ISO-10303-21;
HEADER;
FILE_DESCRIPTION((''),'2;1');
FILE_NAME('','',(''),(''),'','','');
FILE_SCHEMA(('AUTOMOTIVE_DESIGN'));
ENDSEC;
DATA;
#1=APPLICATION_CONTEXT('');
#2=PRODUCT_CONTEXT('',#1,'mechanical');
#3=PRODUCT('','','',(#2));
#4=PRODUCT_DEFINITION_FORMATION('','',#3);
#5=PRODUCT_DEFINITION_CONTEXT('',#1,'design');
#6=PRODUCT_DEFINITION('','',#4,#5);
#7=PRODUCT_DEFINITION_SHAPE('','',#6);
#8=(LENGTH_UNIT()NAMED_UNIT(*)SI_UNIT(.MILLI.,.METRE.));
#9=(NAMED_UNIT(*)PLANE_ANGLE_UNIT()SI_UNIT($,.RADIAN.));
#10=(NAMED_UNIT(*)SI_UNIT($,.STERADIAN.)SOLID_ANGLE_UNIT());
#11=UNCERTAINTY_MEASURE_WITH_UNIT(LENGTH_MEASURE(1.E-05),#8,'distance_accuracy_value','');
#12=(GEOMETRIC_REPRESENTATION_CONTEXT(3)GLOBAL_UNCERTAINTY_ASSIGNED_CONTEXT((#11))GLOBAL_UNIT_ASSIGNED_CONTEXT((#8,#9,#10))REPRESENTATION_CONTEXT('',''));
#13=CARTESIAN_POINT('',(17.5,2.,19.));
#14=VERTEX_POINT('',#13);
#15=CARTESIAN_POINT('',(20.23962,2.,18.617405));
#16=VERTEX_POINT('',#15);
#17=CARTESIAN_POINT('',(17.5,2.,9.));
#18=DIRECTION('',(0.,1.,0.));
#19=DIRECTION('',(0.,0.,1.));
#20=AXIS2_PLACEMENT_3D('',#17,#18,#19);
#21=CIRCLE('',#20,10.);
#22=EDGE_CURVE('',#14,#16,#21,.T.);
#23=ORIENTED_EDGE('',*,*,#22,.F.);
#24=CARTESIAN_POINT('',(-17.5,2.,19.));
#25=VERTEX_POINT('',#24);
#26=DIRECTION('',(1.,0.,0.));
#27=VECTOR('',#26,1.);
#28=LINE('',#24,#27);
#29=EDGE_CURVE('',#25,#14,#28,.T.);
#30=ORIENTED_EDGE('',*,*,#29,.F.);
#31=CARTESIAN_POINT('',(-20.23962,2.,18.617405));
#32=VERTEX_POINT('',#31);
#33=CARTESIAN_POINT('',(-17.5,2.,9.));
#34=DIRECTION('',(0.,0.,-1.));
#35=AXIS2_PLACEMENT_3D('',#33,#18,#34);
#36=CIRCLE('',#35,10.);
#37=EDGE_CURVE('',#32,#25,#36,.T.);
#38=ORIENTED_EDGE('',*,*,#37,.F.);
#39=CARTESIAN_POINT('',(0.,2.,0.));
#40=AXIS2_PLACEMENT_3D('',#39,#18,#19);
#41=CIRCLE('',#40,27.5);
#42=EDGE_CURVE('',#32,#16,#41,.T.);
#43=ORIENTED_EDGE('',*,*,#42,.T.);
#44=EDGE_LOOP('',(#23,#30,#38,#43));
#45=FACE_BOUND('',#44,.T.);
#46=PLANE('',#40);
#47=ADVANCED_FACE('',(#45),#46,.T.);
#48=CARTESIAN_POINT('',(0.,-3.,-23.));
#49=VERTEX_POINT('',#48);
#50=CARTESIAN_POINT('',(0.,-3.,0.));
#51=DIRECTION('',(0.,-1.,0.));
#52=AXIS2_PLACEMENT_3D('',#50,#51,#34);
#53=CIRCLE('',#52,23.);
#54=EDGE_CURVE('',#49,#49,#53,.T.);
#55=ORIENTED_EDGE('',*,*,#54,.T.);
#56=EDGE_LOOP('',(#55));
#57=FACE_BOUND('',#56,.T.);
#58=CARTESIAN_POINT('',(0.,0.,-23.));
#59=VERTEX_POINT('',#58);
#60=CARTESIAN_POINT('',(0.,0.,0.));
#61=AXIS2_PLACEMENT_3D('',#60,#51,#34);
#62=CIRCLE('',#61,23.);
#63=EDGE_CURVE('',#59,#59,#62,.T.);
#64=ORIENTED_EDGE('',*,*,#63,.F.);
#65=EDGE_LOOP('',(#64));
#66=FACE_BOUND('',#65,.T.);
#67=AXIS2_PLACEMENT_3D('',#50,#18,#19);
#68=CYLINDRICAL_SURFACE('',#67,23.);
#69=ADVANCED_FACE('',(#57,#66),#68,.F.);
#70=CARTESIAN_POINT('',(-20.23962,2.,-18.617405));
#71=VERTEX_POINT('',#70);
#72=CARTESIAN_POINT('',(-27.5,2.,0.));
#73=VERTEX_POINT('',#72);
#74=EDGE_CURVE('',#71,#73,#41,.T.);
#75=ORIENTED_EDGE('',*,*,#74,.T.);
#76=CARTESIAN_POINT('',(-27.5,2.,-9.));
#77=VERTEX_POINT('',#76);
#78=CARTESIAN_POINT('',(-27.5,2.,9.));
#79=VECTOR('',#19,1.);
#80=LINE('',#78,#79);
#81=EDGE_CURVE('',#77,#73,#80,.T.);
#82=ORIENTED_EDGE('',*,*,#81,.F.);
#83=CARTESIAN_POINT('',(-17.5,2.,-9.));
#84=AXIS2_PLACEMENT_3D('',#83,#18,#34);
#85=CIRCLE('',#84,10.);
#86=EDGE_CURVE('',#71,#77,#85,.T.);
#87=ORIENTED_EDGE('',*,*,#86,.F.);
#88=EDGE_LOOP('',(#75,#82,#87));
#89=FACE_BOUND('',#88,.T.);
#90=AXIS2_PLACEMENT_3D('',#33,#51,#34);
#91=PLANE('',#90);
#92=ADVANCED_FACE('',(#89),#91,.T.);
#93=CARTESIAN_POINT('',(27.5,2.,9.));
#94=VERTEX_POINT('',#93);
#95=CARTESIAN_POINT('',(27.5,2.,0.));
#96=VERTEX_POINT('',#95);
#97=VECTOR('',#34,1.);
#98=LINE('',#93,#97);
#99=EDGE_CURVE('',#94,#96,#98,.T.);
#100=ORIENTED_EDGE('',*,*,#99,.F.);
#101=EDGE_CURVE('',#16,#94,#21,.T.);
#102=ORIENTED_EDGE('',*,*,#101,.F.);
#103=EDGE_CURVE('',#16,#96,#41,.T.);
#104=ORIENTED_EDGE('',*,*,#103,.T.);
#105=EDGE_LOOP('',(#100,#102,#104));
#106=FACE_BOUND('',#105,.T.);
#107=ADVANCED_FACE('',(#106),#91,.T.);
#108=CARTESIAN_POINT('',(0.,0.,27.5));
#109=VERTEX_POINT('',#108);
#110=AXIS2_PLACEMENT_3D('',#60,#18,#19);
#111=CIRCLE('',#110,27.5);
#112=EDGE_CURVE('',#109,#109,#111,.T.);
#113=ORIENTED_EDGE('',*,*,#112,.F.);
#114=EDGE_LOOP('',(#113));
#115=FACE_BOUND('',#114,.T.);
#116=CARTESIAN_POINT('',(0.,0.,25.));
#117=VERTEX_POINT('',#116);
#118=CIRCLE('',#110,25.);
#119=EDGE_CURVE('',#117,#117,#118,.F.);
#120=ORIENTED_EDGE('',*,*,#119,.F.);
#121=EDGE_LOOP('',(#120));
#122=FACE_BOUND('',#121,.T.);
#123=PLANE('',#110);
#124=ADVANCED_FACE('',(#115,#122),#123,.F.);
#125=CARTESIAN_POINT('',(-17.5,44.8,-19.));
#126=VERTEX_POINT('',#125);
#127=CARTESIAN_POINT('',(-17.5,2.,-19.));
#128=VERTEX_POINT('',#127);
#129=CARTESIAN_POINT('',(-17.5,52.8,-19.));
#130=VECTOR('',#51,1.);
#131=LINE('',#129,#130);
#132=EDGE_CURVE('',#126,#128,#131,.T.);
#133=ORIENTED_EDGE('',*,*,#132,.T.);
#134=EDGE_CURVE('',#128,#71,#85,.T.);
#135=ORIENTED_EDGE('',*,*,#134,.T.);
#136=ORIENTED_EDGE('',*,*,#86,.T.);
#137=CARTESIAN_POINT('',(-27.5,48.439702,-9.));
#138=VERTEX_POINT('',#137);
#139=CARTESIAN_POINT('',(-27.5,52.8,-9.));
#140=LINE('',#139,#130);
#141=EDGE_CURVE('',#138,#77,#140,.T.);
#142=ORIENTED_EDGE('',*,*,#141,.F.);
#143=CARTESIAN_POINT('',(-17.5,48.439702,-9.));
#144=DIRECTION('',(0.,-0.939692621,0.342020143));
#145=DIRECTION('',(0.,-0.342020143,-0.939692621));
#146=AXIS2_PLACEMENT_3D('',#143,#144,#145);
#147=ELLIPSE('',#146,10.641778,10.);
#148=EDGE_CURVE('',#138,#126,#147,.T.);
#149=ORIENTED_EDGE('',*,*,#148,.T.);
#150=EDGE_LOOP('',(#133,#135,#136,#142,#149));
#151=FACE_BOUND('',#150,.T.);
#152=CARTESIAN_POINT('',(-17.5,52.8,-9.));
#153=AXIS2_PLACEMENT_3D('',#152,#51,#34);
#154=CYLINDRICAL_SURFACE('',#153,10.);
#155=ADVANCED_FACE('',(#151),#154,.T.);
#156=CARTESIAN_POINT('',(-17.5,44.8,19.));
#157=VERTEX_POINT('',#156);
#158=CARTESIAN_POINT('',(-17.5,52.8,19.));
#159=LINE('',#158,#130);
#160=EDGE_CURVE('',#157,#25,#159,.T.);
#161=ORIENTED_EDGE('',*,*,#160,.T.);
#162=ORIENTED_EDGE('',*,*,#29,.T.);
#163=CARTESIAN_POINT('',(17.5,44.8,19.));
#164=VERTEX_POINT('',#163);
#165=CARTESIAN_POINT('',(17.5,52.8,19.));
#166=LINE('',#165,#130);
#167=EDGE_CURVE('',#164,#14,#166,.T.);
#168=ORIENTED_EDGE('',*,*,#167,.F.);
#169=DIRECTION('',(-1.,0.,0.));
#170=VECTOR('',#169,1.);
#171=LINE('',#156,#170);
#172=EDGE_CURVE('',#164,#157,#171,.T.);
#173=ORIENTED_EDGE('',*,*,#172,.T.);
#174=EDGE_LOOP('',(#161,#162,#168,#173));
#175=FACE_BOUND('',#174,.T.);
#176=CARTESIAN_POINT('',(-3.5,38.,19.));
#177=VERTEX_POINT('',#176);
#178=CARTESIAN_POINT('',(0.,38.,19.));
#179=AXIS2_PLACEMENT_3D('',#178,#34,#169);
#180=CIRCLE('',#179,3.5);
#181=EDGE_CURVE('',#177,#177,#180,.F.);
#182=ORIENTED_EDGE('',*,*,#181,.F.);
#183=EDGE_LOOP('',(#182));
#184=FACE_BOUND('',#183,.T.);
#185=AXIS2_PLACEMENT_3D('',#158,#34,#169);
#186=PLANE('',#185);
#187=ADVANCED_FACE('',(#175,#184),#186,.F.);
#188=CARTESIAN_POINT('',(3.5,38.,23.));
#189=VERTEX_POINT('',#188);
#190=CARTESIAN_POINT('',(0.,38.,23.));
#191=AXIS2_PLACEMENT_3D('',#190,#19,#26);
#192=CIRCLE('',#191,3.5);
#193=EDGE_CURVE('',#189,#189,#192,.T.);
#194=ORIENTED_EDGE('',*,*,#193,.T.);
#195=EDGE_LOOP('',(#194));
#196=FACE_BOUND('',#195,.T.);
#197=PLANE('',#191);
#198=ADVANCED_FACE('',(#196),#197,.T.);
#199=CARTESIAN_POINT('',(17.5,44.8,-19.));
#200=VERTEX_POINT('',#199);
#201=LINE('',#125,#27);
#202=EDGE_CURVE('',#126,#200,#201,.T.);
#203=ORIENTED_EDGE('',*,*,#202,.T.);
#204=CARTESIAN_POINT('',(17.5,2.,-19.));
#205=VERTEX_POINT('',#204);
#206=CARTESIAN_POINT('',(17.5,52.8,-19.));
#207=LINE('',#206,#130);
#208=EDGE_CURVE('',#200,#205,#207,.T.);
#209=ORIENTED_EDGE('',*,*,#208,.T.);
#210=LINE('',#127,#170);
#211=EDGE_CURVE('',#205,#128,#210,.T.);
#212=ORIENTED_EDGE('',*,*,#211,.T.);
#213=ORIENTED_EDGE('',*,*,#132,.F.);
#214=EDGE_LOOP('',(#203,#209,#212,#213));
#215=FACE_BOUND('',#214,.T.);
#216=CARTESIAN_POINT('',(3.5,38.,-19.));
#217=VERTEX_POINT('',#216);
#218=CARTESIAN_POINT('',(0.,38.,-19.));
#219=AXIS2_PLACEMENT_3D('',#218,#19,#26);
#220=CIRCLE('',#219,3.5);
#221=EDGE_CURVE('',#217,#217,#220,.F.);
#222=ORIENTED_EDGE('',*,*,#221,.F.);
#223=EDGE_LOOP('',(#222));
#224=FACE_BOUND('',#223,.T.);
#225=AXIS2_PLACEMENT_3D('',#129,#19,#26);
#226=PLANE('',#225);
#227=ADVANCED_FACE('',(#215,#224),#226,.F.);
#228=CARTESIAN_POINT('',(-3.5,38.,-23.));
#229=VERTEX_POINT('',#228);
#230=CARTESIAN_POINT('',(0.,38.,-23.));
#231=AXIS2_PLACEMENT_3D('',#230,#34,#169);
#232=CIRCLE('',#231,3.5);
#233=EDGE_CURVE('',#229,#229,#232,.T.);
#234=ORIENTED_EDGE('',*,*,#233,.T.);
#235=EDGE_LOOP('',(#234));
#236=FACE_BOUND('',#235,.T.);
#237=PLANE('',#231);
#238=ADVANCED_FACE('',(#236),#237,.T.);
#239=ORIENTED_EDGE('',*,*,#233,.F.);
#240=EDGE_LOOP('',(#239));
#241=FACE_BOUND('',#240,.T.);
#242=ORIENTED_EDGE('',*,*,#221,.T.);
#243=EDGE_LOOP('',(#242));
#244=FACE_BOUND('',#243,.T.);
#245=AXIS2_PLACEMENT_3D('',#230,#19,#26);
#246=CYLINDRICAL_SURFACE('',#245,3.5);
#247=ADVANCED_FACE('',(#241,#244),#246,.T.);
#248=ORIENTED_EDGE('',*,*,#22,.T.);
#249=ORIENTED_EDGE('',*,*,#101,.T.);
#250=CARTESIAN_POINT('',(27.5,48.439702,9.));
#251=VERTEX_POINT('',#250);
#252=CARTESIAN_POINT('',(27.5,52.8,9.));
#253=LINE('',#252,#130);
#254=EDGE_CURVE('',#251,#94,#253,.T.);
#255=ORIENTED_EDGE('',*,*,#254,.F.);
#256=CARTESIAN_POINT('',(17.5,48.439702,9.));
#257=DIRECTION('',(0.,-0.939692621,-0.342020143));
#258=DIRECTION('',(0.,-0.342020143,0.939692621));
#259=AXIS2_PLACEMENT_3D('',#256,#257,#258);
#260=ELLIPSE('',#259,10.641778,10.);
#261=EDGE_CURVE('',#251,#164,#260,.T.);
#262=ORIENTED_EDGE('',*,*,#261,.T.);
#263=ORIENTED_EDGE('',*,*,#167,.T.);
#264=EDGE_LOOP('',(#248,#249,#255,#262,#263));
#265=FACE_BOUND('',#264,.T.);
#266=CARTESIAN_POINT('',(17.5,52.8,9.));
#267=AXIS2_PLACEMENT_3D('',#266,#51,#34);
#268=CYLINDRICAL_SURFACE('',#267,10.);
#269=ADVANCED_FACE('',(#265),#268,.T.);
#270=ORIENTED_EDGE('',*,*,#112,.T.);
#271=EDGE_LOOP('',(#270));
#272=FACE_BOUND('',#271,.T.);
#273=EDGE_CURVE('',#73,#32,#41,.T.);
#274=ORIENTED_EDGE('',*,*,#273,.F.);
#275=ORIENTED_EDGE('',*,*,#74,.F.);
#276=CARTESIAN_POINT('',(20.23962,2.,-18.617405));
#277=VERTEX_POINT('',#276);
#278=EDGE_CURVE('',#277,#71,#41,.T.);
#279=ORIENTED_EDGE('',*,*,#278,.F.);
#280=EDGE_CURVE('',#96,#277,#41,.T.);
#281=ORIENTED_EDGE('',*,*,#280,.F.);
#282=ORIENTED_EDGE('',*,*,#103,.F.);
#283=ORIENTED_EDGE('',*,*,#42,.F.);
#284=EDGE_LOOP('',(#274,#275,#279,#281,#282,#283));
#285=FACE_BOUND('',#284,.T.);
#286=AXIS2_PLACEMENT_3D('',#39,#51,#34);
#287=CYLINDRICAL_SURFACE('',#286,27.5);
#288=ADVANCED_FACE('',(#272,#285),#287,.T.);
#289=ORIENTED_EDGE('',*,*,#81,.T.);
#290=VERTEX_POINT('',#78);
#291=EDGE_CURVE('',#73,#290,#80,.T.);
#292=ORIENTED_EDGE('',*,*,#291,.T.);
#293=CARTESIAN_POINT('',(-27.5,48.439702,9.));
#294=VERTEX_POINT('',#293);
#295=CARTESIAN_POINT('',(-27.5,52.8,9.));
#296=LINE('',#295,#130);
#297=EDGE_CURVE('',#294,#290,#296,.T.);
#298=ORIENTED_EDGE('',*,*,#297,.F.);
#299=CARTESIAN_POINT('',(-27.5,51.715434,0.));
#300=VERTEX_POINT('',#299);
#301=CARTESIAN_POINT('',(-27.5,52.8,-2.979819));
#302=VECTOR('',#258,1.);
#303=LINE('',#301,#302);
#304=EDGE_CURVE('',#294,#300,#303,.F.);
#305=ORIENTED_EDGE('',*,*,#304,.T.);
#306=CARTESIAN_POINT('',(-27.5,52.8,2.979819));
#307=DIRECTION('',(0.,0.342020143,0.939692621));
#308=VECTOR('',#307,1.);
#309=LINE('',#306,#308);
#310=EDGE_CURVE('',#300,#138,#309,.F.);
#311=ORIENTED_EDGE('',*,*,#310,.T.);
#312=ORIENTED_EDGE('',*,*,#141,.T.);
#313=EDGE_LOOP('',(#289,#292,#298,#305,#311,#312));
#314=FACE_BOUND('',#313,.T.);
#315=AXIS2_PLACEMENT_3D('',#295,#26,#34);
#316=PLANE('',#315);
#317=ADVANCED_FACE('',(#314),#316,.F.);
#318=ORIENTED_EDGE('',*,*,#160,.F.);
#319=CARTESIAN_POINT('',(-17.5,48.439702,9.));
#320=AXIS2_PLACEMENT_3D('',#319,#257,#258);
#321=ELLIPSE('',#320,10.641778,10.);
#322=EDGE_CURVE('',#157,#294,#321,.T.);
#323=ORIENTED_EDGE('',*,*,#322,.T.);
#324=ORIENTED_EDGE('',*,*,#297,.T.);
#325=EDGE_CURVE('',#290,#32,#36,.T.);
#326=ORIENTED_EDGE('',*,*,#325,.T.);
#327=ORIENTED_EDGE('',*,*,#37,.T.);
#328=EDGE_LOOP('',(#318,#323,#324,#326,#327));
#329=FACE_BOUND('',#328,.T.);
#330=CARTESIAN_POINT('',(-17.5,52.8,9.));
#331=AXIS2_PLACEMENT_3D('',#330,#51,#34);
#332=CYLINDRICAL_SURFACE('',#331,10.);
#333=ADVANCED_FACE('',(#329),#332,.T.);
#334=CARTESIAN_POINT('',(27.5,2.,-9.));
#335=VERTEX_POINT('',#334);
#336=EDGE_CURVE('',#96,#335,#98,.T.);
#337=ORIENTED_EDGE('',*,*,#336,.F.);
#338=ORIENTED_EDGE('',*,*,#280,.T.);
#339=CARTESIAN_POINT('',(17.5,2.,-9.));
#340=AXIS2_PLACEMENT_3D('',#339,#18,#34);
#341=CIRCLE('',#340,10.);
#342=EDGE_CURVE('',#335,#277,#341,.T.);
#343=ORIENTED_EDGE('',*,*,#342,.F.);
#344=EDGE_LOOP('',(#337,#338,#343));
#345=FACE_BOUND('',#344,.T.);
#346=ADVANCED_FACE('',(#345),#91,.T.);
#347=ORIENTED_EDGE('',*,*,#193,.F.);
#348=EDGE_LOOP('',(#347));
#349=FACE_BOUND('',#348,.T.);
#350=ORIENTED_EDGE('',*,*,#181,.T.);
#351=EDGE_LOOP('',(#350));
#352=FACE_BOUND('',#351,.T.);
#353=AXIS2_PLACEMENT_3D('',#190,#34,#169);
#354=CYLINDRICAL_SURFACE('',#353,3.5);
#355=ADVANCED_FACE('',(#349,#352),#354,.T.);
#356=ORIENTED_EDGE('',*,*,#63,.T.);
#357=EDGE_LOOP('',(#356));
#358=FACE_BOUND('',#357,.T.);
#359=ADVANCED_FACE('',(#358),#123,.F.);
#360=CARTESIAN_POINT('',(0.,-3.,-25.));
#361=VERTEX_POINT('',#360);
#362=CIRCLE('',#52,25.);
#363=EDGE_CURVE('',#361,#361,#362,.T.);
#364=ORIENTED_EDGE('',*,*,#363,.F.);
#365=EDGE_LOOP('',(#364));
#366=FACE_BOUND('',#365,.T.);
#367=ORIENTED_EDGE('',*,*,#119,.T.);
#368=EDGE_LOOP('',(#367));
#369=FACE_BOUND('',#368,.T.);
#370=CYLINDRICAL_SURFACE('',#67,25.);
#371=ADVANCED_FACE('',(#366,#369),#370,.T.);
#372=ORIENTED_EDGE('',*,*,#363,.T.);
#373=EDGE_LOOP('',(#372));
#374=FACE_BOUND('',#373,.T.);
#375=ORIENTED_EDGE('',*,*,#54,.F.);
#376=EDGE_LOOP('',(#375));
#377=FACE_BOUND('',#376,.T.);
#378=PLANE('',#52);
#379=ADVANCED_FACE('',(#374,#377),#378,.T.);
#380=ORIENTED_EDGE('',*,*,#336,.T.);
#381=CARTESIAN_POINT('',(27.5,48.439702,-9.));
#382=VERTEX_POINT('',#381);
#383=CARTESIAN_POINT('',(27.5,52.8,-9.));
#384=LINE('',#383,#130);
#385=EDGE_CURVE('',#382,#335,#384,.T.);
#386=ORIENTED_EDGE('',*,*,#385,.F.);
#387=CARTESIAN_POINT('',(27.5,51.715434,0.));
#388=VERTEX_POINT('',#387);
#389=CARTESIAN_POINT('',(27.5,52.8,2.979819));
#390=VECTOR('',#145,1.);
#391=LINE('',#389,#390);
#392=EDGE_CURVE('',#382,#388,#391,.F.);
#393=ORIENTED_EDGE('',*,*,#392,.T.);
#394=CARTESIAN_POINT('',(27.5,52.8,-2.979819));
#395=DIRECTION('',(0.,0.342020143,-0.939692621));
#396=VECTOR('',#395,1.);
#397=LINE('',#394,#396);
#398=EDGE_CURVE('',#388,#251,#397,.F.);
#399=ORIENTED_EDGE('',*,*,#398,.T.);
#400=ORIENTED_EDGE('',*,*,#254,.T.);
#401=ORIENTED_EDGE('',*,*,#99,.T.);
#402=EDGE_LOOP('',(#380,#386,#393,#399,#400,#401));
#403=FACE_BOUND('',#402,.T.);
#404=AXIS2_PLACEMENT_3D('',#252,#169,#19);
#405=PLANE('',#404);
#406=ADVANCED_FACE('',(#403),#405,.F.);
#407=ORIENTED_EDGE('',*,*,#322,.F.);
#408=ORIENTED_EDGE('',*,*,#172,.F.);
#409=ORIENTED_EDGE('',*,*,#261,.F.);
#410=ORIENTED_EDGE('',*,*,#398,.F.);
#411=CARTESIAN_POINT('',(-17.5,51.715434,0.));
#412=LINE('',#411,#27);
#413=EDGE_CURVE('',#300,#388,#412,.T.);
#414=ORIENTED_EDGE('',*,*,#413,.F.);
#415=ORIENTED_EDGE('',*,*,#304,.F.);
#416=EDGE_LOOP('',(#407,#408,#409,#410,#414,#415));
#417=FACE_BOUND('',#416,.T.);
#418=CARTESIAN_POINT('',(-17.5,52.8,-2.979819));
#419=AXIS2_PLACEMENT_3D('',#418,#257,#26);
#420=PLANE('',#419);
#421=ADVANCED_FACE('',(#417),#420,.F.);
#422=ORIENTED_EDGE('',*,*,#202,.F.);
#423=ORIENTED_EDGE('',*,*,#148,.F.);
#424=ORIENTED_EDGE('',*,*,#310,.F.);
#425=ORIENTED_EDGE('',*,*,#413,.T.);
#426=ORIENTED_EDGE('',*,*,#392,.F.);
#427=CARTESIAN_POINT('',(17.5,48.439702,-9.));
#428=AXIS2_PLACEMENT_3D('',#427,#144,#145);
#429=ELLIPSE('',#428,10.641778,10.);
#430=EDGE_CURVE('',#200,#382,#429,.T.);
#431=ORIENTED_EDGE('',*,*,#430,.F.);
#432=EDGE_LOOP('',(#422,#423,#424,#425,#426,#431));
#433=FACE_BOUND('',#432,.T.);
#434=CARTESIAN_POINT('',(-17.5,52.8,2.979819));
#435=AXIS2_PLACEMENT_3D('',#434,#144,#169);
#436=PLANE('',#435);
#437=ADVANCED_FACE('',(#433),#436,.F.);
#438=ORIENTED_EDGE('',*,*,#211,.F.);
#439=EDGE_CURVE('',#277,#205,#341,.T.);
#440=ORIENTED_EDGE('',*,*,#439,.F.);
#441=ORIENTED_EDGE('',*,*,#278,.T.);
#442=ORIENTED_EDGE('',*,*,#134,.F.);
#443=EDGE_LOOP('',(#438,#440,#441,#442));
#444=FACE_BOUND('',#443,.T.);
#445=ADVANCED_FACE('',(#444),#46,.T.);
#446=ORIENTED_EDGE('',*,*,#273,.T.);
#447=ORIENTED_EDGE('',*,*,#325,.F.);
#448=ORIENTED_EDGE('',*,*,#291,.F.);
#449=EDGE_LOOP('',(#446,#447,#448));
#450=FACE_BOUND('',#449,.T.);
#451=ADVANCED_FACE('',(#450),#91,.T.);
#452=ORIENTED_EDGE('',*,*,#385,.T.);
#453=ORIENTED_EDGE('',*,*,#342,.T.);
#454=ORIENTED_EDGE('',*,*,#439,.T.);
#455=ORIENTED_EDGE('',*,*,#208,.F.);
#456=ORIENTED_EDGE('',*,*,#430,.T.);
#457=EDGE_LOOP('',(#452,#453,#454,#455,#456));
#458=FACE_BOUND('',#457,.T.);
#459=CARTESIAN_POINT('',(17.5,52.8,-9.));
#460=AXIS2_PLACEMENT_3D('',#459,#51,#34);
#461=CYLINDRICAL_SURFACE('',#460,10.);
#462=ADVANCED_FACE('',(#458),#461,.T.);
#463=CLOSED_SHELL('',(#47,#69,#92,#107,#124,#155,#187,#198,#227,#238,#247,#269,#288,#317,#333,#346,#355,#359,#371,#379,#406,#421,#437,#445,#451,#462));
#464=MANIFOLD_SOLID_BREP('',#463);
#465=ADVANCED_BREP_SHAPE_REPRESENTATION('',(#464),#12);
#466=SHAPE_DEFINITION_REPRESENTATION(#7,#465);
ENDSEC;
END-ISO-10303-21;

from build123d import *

# Parameters (mm, degrees)
IZIM1_R                     = 27.5
Y_KSEKLIK_EKSTR_ZYON1_DEPTH = 2
IZIM2_R                     = 25
IZIM2_R_2                   = 23
Y_KSEKLIK_EKSTR_ZYON2_DEPTH = 3
Y_KSEKLIK_EKSTR_ZYON3_DEPTH = 50.8
PAH1_SIZE                   = 8
PAH1_SIZE_2                 = 21.979819356
PAH2_SIZE                   = 8
PAH2_SIZE_2                 = 21.979819356
IZIM4_R                     = 3.5
Y_KSEKLIK_EKSTR_ZYON4_DEPTH = 4
Y_KSEKLIK_EKSTR_ZYON5_START = 4
IZIM5_R                     = 3.5
Y_KSEKLIK_EKSTR_ZYON5_DEPTH = 4


with BuildPart() as part:
    # Çizim1 → Yükseklik-Ekstrüzyon1 (new body)
    with BuildSketch(Plane(origin=(0, 0, 0), x_dir=(1, 0, 0), z_dir=(0, 1, 0))):
        with Locations(Location((0, 0, 0), (0, 0, 270))):
            Circle(IZIM1_R)
    extrude(amount=Y_KSEKLIK_EKSTR_ZYON1_DEPTH)

    # Çizim2 → Yükseklik-Ekstrüzyon2 (add)
    with BuildSketch(Plane.XZ):
        with Locations(Location((0, 0, 0), (0, 0, 90))):
            Circle(IZIM2_R)
        with Locations(Location((0, 0, 0), (0, 0, 270))):
            Circle(IZIM2_R_2, mode=Mode.SUBTRACT)
    extrude(amount=Y_KSEKLIK_EKSTR_ZYON2_DEPTH)

    # Çizim3 → Yükseklik-Ekstrüzyon3 (add)
    with BuildSketch(Plane(origin=(0, 2, 0), x_dir=(1, 0, 0), z_dir=(0, 1, 0))):
        with BuildLine():
            Line((-17.5, -19), (17.5, -19))
            ThreePointArc((17.5, -19), (24.571067812, -16.071067812), (27.5, -9))
            Line((27.5, -9), (27.5, 9))
            ThreePointArc((27.5, 9), (24.571067812, 16.071067812), (17.5, 19))
            Line((17.5, 19), (-17.5, 19))
            ThreePointArc((-17.5, 19), (-24.571067812, 16.071067812), (-27.5, 9))
            Line((-27.5, 9), (-27.5, -9))
            ThreePointArc((-27.5, -9), (-24.571067812, -16.071067812), (-17.5, -19))
        make_face()
    extrude(amount=Y_KSEKLIK_EKSTR_ZYON3_DEPTH)

    # Pah1
    # the kernel refuses this chamfer: 21.979819356, 8 mm, written as the material it takes off along each edge
    with BuildSketch(Plane(origin=(74.519931595, 52.8, -19), x_dir=(0, -0.9950833631817486, -0.0990409022520504), z_dir=(-1, 0, 0))) as pah1_piece_1:
        Polygon((PAH1_SIZE * 0.995083363182, PAH1_SIZE * 0.0990409022521), (-PAH1_SIZE_2 * 0.0990409022504, PAH1_SIZE_2 * 0.995083363165), (0, 0), align=None)
    extrude(amount=149.03986319, mode=Mode.SUBTRACT)

    # Pah2
    # the kernel refuses this chamfer: 21.979819356, 8 mm, written as the material it takes off along each edge
    with BuildSketch(Plane(origin=(-74.519931595, 52.8, 19), x_dir=(0, -0.9950833631817486, 0.0990409022520504), z_dir=(1, 0, 0))) as pah2_piece_1:
        Polygon((PAH2_SIZE * 0.995083363182, PAH2_SIZE * 0.0990409022521), (-PAH2_SIZE_2 * 0.0990409022504, PAH2_SIZE_2 * 0.995083363165), (0, 0), align=None)
    extrude(amount=149.03986319, mode=Mode.SUBTRACT)

    # Çizim4 → Yükseklik-Ekstrüzyon4 (add)
    with BuildSketch(Plane.XY.offset(19)):
        with Locations(Location((0, 38, 0), (0, 0, 180))):
            Circle(IZIM4_R)
    extrude(amount=Y_KSEKLIK_EKSTR_ZYON4_DEPTH)

    # Çizim5 → Yükseklik-Ekstrüzyon5 (add)
    with BuildSketch(Plane(origin=(0, 0, -19), x_dir=(-1, 0, 0), z_dir=(0, 0, -1)).offset(Y_KSEKLIK_EKSTR_ZYON5_START)):
        with Locations((0, 38)):
            Circle(IZIM5_R)
    extrude(amount=-Y_KSEKLIK_EKSTR_ZYON5_DEPTH)


solid = part.part
